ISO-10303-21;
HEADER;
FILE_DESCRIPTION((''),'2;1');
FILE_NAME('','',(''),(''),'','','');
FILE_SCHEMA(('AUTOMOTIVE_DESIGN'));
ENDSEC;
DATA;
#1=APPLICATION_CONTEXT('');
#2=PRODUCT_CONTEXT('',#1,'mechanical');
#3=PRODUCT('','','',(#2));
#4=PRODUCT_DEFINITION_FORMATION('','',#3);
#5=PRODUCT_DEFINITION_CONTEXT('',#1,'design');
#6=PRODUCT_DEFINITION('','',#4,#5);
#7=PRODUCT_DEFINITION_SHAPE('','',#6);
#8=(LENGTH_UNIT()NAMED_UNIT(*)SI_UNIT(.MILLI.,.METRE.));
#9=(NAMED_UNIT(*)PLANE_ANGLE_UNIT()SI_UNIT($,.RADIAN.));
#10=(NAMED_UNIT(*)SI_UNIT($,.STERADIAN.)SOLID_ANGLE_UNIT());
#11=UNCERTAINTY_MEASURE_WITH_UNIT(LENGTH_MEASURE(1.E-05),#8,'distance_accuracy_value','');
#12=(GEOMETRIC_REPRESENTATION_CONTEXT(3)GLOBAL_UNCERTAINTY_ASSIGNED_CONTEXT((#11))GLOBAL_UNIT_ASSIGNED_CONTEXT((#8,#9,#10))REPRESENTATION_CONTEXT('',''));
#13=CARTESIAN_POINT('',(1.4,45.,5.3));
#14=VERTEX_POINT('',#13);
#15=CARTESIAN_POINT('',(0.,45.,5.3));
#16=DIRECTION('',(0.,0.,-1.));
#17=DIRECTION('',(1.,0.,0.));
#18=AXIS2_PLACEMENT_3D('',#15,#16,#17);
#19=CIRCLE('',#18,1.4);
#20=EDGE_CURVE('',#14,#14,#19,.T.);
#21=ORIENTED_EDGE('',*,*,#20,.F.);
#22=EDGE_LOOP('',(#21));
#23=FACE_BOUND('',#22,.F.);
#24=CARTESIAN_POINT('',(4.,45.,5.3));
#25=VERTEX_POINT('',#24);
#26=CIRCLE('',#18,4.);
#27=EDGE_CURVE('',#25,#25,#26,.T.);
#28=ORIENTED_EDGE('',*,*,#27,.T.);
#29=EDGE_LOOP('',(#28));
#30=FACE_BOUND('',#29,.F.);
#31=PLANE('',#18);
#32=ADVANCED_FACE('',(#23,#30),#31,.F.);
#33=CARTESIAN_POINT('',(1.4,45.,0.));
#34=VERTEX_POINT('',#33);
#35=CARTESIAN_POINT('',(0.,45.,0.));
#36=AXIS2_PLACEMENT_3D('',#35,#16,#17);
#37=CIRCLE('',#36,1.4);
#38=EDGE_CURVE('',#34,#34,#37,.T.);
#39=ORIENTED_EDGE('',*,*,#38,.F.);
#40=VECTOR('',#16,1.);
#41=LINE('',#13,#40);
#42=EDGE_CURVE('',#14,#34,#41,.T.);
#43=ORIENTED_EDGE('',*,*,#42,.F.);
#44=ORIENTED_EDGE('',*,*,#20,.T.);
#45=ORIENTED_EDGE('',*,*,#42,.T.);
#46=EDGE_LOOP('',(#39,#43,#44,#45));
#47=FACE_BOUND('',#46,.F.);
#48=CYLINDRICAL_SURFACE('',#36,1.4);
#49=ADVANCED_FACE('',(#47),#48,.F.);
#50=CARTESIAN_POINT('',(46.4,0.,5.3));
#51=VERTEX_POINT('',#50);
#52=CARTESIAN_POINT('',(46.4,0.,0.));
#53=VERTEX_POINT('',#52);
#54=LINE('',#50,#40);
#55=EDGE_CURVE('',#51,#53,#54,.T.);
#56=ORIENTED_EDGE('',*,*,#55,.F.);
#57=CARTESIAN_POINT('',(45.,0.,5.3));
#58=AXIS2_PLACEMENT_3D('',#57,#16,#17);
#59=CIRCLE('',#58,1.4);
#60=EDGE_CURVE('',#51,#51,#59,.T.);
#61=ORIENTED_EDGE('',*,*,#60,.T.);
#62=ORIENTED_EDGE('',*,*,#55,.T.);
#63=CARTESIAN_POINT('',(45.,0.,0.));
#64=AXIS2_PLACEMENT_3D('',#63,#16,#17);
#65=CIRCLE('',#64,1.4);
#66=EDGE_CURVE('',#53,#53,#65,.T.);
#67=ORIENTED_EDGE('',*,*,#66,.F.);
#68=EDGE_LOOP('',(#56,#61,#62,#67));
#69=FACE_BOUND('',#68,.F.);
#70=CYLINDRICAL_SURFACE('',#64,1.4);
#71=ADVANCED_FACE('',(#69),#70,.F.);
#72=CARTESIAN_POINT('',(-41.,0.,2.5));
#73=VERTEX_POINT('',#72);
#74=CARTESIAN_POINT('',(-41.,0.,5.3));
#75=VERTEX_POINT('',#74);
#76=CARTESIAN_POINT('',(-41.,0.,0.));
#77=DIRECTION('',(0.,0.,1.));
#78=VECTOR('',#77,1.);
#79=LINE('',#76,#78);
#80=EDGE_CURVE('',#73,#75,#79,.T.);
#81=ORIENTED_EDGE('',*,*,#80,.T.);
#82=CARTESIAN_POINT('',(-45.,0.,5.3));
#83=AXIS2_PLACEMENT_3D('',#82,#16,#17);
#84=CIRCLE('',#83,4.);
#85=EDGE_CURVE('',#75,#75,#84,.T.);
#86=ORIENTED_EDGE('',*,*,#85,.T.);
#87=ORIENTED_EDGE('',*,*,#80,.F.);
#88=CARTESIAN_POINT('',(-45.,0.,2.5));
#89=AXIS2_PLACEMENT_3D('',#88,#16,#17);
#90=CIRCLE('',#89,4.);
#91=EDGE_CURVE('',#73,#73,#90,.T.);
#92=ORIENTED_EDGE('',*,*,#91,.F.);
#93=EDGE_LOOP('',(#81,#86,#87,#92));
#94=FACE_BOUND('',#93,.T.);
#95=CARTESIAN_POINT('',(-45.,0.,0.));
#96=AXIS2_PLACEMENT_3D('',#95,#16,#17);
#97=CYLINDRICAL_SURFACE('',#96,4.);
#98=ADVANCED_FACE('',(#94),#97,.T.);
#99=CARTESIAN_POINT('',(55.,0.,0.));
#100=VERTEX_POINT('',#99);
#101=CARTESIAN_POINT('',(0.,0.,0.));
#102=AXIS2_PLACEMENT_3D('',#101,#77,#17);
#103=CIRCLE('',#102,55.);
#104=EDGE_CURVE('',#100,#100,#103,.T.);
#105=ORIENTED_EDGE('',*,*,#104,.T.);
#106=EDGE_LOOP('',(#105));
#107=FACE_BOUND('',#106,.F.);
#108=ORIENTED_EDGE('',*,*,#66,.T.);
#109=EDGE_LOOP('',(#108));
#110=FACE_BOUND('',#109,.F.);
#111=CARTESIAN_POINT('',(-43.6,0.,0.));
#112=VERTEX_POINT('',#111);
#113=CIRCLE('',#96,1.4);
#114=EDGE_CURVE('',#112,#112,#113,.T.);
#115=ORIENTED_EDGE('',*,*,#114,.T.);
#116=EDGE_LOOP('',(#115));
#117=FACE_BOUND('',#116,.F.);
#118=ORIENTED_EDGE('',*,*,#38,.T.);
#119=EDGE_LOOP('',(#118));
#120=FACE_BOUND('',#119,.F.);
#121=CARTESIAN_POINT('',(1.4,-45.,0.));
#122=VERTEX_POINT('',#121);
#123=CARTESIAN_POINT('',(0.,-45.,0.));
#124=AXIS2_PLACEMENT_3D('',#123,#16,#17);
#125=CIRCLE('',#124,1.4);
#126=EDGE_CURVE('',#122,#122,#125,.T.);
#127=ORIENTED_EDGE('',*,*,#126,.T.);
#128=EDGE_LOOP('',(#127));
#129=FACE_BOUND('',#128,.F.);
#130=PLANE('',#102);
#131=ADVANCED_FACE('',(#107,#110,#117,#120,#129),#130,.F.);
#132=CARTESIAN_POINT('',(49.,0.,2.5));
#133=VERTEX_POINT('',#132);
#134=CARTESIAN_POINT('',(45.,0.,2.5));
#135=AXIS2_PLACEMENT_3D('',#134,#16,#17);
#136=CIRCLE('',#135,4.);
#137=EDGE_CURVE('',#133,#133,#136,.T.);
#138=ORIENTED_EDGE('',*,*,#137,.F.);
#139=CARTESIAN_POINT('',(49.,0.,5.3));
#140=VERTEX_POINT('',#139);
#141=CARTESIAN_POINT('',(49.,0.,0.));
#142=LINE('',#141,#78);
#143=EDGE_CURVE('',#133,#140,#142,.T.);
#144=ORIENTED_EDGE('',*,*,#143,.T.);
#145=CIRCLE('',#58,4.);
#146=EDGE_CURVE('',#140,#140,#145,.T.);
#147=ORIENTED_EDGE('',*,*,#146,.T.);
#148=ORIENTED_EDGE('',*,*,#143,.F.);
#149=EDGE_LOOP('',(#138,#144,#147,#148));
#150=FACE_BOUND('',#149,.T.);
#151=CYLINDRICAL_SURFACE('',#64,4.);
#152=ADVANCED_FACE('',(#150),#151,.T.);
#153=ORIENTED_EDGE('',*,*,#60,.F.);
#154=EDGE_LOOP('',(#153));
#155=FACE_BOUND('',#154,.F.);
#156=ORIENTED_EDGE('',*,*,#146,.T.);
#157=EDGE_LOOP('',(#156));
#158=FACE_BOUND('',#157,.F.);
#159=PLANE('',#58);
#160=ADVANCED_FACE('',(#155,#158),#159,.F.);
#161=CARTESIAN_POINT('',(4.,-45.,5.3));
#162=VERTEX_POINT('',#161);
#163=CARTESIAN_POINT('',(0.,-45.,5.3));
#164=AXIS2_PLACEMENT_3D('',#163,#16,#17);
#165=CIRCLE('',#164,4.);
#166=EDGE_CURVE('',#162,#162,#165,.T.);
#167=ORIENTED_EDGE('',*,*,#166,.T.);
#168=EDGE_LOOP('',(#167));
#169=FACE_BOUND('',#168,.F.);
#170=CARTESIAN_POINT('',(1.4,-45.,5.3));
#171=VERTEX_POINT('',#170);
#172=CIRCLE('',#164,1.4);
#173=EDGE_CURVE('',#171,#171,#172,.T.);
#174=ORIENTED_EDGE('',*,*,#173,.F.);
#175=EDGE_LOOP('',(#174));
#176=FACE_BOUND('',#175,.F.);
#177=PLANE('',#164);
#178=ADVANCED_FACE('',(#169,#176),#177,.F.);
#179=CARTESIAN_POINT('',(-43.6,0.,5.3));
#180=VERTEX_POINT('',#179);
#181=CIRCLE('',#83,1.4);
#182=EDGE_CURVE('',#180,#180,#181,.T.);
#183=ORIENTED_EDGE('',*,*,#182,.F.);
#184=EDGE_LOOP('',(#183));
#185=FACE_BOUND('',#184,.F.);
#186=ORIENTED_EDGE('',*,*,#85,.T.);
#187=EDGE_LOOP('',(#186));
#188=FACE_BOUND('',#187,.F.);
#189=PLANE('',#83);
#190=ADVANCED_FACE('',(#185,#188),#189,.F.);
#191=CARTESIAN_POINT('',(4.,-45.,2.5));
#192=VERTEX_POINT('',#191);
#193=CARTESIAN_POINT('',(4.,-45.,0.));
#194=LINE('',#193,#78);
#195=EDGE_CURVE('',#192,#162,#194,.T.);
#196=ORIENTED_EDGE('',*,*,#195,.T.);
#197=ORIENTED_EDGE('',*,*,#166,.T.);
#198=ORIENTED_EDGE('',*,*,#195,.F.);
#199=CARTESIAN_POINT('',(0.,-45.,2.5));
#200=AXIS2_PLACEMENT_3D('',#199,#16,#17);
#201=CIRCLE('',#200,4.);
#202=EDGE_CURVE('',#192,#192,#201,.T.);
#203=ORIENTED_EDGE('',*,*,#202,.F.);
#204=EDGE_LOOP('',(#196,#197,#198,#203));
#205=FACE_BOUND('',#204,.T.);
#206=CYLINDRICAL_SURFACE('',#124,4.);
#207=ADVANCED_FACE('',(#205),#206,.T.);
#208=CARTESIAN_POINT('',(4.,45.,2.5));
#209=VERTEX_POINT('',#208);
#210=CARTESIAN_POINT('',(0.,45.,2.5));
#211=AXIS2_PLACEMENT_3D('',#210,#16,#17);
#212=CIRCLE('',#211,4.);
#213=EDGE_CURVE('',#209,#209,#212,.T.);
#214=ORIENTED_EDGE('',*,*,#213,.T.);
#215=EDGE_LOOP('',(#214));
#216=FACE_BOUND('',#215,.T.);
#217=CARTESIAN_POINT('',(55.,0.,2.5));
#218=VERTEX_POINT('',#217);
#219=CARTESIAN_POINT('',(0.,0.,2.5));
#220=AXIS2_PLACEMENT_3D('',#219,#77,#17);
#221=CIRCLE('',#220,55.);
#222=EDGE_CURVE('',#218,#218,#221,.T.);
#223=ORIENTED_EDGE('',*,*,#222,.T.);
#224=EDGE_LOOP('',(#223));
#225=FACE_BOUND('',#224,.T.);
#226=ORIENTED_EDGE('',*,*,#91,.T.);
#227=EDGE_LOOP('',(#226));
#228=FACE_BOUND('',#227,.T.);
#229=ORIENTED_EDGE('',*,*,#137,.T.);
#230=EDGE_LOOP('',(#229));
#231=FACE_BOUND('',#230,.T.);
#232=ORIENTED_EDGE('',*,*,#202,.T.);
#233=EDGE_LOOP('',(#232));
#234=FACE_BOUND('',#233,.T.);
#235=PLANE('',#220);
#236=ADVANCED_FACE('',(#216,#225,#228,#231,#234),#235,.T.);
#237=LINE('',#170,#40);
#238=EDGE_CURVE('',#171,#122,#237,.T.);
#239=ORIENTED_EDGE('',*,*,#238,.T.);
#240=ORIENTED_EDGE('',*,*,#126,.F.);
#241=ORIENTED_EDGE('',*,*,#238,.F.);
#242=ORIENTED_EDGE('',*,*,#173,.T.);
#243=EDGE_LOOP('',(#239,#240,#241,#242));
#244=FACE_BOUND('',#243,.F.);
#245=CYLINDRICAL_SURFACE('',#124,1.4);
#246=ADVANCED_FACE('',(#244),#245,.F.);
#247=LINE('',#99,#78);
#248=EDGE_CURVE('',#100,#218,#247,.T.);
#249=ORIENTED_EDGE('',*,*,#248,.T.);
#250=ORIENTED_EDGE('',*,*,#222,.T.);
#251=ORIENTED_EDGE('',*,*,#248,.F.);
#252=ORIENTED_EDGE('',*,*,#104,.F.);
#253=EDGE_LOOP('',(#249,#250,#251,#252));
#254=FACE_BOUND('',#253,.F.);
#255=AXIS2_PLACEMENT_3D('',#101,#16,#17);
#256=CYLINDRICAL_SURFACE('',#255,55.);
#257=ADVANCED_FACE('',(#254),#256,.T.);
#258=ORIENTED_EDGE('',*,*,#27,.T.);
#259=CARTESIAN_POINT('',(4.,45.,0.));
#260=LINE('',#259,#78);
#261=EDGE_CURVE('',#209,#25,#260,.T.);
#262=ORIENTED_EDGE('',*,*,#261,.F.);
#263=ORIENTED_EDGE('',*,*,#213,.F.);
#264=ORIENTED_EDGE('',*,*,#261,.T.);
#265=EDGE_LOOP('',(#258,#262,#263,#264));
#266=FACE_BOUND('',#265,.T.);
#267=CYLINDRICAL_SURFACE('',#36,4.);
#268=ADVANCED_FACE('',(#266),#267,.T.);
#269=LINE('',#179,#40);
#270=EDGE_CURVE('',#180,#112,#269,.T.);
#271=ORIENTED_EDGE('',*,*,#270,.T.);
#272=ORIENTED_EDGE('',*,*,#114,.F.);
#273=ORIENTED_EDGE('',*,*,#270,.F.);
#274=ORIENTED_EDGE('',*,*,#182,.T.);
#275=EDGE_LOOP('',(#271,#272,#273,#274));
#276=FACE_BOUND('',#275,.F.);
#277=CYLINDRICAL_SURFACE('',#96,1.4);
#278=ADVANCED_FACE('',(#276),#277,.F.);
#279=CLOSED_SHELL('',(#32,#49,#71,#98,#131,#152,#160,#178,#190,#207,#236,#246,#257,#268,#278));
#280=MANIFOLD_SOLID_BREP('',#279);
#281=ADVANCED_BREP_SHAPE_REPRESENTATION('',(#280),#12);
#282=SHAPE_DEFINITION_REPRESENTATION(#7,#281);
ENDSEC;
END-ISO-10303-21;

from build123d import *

# Parameters (mm, degrees)
F0_R     = 55
F1_DEPTH = 2.5
F2_R     = 1.4
F3_DEPTH = 12.5
F2_R_2   = 4
F4_DEPTH = 5.3


with BuildPart() as f1:
    # F0 (on Top) → F1 (new body)
    with BuildSketch(Plane.XY):
        Circle(F0_R)
    extrude(amount=F1_DEPTH)

    # F2 (on face) → F3 (cut, symmetric)
    with BuildSketch(Plane(origin=(0, 0, 0), x_dir=(1, 0, 0), z_dir=(0, 0, -1))):
        with Locations((0, -45)):
            Circle(F2_R)
        with Locations((-45, 0)):
            Circle(F2_R)
        with Locations((0, 45)):
            Circle(F2_R)
        with Locations((45, 0)):
            Circle(F2_R)
    extrude(amount=F3_DEPTH, both=True, mode=Mode.SUBTRACT)

    # F2 (on face) → F4 (join)
    with BuildSketch(Plane(origin=(0, 0, 0), x_dir=(1, 0, 0), z_dir=(0, 0, -1))):
        with Locations((-45, 0)):
            Circle(F2_R_2)
        with Locations((-45, 0)):
            Circle(F2_R, mode=Mode.SUBTRACT)
        with Locations((0, -45)):
            Circle(F2_R_2)
        with Locations((0, -45)):
            Circle(F2_R, mode=Mode.SUBTRACT)
        with Locations((45, 0)):
            Circle(F2_R_2)
        with Locations((45, 0)):
            Circle(F2_R, mode=Mode.SUBTRACT)
        with Locations((0, 45)):
            Circle(F2_R_2)
        with Locations((0, 45)):
            Circle(F2_R, mode=Mode.SUBTRACT)
    extrude(amount=-F4_DEPTH)


solid = f1.part
